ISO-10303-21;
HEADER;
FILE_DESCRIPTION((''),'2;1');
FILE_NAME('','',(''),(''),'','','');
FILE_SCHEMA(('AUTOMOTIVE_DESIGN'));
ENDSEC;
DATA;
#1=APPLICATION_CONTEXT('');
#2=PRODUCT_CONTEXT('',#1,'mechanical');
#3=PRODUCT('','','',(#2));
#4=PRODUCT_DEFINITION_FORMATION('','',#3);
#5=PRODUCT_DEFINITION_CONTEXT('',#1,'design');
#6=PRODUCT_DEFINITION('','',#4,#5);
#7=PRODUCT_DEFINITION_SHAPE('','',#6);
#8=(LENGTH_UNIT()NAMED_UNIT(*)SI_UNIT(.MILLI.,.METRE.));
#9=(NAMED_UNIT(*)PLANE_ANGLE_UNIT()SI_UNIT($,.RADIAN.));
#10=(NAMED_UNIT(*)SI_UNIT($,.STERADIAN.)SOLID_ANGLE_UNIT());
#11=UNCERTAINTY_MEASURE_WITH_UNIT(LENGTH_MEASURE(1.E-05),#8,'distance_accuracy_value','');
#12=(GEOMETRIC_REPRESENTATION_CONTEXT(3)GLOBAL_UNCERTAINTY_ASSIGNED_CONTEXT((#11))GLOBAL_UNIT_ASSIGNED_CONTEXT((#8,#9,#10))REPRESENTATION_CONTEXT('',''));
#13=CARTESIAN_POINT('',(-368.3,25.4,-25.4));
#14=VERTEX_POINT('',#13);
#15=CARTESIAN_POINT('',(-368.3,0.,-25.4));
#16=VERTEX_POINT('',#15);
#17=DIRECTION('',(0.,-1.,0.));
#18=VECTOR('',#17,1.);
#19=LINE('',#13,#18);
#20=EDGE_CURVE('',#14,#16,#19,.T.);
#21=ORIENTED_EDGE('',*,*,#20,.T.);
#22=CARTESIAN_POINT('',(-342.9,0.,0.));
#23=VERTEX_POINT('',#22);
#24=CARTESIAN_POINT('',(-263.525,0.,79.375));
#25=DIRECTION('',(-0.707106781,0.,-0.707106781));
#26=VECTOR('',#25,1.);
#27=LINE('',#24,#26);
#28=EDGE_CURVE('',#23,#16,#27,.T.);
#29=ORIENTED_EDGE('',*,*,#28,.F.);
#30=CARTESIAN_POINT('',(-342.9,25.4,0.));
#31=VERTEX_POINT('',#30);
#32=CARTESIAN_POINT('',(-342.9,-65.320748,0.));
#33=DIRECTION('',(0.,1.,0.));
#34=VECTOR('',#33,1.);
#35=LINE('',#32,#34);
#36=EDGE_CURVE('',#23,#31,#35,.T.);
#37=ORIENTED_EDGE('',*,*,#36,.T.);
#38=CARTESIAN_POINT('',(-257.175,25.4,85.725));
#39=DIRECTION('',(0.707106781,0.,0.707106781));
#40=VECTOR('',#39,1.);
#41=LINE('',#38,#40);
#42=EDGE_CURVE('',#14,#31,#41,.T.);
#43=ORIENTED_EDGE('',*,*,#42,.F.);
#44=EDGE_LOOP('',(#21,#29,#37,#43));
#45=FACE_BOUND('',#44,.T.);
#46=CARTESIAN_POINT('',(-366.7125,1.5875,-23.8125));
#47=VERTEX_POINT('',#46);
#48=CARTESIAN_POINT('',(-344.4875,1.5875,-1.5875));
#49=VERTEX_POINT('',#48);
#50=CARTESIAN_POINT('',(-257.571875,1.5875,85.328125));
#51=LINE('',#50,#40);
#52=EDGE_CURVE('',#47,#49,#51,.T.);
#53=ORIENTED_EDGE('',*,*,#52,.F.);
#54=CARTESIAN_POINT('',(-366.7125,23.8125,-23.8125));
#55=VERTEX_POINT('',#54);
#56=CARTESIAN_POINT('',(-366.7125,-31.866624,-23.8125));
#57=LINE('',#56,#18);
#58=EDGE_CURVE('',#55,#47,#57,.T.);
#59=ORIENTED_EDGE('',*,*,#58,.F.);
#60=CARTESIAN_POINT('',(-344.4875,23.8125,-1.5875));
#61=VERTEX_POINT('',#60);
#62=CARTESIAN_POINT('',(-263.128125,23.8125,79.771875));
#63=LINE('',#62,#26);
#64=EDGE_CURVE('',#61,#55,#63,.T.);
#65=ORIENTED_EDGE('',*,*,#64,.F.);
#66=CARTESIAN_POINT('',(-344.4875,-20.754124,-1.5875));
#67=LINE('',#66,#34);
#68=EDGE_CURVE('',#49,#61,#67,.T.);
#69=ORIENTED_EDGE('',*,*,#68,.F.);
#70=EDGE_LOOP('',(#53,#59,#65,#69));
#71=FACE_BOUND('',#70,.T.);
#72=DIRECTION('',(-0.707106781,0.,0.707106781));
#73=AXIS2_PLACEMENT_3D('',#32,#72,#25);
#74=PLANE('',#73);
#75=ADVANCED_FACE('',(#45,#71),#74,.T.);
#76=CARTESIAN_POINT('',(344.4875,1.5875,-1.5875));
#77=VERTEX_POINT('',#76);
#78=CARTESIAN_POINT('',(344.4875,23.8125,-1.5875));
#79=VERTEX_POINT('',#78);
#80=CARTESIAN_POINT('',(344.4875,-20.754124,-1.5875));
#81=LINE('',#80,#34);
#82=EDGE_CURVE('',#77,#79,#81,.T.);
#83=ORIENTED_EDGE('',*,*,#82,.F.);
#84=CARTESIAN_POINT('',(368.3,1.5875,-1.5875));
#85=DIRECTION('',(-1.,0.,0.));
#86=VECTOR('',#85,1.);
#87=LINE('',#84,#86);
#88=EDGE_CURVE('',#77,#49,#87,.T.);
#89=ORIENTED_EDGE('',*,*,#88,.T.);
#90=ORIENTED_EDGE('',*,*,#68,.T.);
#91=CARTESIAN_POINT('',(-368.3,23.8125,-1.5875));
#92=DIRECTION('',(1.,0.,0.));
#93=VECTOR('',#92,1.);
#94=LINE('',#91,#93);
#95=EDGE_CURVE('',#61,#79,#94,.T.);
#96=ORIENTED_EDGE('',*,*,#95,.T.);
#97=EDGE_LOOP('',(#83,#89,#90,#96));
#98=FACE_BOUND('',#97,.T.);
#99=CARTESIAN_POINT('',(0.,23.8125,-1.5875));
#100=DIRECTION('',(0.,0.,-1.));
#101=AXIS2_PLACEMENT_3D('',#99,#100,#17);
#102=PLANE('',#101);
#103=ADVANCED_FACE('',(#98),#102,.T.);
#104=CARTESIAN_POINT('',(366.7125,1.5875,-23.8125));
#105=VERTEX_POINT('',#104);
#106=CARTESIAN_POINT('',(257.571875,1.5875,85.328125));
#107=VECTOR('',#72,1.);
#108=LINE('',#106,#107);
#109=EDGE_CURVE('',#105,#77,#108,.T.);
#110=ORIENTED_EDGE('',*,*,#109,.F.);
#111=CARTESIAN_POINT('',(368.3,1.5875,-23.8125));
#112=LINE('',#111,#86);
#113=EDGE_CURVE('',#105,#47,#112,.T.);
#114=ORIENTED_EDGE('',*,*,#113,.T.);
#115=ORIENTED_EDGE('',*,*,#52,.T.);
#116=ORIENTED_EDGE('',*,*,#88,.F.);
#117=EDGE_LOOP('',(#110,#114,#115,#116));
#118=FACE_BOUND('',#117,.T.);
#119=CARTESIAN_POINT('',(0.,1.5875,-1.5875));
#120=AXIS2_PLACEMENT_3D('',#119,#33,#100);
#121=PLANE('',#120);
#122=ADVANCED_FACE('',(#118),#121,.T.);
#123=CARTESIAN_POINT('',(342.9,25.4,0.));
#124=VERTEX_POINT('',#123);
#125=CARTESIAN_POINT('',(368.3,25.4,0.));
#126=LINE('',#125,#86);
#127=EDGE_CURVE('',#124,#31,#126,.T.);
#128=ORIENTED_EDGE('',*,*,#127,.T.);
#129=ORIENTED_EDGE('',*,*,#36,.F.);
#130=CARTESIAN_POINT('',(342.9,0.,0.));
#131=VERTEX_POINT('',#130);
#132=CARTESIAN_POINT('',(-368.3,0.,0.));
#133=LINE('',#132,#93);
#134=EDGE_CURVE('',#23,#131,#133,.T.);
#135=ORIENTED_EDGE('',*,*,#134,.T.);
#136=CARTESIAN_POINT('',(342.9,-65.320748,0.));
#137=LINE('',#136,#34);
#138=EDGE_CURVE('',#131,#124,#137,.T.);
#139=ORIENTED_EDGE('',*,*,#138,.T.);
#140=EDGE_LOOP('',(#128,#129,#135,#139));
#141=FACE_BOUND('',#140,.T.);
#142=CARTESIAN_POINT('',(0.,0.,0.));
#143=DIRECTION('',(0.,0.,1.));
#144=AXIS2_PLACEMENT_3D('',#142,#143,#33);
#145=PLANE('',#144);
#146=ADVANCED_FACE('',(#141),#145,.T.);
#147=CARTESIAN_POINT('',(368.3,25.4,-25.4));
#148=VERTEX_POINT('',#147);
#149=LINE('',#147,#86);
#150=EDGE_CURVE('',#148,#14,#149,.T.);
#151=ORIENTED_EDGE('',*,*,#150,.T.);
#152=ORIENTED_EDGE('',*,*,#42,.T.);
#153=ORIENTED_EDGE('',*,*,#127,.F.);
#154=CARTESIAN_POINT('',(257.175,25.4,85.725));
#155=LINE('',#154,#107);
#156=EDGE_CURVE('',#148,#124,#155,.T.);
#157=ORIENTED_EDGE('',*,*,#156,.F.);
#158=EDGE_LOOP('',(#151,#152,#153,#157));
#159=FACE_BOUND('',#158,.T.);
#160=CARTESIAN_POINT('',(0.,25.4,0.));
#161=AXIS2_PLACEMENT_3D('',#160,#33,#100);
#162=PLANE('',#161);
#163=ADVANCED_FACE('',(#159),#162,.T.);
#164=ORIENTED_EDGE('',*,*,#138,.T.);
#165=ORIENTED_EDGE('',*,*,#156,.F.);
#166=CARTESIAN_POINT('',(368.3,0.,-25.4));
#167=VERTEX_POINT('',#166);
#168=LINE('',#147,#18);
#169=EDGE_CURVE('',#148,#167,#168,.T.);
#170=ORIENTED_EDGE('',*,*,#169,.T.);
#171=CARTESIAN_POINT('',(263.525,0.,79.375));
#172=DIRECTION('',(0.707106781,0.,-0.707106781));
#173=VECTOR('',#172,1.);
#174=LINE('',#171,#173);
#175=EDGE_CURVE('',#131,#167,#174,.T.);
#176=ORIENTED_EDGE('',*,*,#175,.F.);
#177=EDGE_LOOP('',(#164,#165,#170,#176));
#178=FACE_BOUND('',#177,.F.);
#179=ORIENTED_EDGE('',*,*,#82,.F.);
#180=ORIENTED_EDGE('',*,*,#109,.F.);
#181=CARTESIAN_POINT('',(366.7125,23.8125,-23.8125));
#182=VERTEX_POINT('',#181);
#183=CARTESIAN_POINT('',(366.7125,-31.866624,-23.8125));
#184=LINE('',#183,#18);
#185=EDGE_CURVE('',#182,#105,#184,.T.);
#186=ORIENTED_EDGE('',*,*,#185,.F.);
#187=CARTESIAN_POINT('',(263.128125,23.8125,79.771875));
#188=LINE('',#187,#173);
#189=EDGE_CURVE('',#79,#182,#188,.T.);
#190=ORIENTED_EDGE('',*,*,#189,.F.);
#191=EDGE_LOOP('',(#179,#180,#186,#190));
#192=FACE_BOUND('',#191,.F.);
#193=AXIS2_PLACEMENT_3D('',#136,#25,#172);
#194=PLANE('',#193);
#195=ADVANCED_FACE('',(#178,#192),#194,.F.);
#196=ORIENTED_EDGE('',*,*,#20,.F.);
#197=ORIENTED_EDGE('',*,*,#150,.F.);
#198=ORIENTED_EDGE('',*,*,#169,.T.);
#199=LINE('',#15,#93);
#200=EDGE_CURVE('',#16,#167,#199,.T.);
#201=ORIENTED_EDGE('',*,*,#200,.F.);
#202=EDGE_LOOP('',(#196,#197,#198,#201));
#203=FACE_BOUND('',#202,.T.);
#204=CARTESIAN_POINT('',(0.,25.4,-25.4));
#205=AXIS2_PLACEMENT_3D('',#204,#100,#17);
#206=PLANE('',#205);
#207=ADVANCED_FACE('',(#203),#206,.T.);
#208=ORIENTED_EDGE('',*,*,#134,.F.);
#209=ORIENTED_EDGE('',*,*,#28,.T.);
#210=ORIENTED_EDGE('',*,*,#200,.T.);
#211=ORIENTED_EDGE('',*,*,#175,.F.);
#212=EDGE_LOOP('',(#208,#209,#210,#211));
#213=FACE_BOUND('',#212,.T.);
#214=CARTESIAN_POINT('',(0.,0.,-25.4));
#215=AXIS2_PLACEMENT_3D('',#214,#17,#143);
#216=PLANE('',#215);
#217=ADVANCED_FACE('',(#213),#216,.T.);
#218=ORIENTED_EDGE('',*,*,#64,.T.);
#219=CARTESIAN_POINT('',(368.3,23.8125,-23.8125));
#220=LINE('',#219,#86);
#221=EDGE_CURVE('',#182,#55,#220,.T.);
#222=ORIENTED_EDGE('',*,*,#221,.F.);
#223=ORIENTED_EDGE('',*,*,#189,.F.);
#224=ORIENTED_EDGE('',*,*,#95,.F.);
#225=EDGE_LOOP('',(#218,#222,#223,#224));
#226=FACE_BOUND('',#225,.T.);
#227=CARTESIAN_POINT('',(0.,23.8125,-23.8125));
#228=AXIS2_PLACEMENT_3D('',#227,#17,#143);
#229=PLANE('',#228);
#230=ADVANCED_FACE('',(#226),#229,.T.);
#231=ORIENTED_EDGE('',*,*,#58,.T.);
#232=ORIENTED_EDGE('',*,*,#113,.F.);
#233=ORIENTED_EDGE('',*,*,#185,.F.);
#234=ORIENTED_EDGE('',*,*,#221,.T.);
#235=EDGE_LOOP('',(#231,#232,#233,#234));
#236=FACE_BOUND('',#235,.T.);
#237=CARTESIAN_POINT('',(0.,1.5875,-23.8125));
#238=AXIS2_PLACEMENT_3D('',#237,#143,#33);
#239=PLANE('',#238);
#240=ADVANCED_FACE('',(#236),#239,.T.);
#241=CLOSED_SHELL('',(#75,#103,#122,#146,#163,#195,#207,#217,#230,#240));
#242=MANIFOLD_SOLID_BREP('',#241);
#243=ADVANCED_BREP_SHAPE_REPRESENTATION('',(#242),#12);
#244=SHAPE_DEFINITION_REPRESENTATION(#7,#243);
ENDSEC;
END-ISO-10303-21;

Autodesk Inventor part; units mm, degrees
ref_plane "YZ Plane" through (0, 0, 0) normal (1, 0, 0) x (0, 1, 0)
ref_plane "XZ Plane" through (0, 0, 0) normal (0, 1, 0) x (-1, 0, 0)
ref_plane "XY Plane" through (0, 0, 0) normal (0, 0, 1) x (1, 0, 0)
sketch "Sketch1" plane through (0, 0, 0) normal (1, 0, 0) x (0, 1, 0)
  line L0 (0, 0) -> (25.4, 0)
  line L1 (25.4, 0) -> (25.4, -25.4)
  line L2 (25.4, -25.4) -> (0, -25.4)
  line L3 (0, -25.4) -> (0, 0)
  line L4 (23.8125, -1.5875) -> (1.5875, -1.5875)
  line L5 (1.5875, -1.5875) -> (1.5875, -23.8125)
  line L6 (1.5875, -23.8125) -> (23.8125, -23.8125)
  line L7 (23.8125, -23.8125) -> (23.8125, -1.5875)
  dimension "d0" = 25.4
  dimension "d1" = 25.4
  dimension "d2" = 1.5875
extrude "Extrusion1" add sketch "Sketch1" along normal mid plane 736.6
chamfer "Chamfer1" distance 25.4 angle 45 2 edges at (-368.3, 12.7, 0) (368.3, 12.7, 0)
properties part number "FRA_TopSide_004" material "Aluminum 6061"
